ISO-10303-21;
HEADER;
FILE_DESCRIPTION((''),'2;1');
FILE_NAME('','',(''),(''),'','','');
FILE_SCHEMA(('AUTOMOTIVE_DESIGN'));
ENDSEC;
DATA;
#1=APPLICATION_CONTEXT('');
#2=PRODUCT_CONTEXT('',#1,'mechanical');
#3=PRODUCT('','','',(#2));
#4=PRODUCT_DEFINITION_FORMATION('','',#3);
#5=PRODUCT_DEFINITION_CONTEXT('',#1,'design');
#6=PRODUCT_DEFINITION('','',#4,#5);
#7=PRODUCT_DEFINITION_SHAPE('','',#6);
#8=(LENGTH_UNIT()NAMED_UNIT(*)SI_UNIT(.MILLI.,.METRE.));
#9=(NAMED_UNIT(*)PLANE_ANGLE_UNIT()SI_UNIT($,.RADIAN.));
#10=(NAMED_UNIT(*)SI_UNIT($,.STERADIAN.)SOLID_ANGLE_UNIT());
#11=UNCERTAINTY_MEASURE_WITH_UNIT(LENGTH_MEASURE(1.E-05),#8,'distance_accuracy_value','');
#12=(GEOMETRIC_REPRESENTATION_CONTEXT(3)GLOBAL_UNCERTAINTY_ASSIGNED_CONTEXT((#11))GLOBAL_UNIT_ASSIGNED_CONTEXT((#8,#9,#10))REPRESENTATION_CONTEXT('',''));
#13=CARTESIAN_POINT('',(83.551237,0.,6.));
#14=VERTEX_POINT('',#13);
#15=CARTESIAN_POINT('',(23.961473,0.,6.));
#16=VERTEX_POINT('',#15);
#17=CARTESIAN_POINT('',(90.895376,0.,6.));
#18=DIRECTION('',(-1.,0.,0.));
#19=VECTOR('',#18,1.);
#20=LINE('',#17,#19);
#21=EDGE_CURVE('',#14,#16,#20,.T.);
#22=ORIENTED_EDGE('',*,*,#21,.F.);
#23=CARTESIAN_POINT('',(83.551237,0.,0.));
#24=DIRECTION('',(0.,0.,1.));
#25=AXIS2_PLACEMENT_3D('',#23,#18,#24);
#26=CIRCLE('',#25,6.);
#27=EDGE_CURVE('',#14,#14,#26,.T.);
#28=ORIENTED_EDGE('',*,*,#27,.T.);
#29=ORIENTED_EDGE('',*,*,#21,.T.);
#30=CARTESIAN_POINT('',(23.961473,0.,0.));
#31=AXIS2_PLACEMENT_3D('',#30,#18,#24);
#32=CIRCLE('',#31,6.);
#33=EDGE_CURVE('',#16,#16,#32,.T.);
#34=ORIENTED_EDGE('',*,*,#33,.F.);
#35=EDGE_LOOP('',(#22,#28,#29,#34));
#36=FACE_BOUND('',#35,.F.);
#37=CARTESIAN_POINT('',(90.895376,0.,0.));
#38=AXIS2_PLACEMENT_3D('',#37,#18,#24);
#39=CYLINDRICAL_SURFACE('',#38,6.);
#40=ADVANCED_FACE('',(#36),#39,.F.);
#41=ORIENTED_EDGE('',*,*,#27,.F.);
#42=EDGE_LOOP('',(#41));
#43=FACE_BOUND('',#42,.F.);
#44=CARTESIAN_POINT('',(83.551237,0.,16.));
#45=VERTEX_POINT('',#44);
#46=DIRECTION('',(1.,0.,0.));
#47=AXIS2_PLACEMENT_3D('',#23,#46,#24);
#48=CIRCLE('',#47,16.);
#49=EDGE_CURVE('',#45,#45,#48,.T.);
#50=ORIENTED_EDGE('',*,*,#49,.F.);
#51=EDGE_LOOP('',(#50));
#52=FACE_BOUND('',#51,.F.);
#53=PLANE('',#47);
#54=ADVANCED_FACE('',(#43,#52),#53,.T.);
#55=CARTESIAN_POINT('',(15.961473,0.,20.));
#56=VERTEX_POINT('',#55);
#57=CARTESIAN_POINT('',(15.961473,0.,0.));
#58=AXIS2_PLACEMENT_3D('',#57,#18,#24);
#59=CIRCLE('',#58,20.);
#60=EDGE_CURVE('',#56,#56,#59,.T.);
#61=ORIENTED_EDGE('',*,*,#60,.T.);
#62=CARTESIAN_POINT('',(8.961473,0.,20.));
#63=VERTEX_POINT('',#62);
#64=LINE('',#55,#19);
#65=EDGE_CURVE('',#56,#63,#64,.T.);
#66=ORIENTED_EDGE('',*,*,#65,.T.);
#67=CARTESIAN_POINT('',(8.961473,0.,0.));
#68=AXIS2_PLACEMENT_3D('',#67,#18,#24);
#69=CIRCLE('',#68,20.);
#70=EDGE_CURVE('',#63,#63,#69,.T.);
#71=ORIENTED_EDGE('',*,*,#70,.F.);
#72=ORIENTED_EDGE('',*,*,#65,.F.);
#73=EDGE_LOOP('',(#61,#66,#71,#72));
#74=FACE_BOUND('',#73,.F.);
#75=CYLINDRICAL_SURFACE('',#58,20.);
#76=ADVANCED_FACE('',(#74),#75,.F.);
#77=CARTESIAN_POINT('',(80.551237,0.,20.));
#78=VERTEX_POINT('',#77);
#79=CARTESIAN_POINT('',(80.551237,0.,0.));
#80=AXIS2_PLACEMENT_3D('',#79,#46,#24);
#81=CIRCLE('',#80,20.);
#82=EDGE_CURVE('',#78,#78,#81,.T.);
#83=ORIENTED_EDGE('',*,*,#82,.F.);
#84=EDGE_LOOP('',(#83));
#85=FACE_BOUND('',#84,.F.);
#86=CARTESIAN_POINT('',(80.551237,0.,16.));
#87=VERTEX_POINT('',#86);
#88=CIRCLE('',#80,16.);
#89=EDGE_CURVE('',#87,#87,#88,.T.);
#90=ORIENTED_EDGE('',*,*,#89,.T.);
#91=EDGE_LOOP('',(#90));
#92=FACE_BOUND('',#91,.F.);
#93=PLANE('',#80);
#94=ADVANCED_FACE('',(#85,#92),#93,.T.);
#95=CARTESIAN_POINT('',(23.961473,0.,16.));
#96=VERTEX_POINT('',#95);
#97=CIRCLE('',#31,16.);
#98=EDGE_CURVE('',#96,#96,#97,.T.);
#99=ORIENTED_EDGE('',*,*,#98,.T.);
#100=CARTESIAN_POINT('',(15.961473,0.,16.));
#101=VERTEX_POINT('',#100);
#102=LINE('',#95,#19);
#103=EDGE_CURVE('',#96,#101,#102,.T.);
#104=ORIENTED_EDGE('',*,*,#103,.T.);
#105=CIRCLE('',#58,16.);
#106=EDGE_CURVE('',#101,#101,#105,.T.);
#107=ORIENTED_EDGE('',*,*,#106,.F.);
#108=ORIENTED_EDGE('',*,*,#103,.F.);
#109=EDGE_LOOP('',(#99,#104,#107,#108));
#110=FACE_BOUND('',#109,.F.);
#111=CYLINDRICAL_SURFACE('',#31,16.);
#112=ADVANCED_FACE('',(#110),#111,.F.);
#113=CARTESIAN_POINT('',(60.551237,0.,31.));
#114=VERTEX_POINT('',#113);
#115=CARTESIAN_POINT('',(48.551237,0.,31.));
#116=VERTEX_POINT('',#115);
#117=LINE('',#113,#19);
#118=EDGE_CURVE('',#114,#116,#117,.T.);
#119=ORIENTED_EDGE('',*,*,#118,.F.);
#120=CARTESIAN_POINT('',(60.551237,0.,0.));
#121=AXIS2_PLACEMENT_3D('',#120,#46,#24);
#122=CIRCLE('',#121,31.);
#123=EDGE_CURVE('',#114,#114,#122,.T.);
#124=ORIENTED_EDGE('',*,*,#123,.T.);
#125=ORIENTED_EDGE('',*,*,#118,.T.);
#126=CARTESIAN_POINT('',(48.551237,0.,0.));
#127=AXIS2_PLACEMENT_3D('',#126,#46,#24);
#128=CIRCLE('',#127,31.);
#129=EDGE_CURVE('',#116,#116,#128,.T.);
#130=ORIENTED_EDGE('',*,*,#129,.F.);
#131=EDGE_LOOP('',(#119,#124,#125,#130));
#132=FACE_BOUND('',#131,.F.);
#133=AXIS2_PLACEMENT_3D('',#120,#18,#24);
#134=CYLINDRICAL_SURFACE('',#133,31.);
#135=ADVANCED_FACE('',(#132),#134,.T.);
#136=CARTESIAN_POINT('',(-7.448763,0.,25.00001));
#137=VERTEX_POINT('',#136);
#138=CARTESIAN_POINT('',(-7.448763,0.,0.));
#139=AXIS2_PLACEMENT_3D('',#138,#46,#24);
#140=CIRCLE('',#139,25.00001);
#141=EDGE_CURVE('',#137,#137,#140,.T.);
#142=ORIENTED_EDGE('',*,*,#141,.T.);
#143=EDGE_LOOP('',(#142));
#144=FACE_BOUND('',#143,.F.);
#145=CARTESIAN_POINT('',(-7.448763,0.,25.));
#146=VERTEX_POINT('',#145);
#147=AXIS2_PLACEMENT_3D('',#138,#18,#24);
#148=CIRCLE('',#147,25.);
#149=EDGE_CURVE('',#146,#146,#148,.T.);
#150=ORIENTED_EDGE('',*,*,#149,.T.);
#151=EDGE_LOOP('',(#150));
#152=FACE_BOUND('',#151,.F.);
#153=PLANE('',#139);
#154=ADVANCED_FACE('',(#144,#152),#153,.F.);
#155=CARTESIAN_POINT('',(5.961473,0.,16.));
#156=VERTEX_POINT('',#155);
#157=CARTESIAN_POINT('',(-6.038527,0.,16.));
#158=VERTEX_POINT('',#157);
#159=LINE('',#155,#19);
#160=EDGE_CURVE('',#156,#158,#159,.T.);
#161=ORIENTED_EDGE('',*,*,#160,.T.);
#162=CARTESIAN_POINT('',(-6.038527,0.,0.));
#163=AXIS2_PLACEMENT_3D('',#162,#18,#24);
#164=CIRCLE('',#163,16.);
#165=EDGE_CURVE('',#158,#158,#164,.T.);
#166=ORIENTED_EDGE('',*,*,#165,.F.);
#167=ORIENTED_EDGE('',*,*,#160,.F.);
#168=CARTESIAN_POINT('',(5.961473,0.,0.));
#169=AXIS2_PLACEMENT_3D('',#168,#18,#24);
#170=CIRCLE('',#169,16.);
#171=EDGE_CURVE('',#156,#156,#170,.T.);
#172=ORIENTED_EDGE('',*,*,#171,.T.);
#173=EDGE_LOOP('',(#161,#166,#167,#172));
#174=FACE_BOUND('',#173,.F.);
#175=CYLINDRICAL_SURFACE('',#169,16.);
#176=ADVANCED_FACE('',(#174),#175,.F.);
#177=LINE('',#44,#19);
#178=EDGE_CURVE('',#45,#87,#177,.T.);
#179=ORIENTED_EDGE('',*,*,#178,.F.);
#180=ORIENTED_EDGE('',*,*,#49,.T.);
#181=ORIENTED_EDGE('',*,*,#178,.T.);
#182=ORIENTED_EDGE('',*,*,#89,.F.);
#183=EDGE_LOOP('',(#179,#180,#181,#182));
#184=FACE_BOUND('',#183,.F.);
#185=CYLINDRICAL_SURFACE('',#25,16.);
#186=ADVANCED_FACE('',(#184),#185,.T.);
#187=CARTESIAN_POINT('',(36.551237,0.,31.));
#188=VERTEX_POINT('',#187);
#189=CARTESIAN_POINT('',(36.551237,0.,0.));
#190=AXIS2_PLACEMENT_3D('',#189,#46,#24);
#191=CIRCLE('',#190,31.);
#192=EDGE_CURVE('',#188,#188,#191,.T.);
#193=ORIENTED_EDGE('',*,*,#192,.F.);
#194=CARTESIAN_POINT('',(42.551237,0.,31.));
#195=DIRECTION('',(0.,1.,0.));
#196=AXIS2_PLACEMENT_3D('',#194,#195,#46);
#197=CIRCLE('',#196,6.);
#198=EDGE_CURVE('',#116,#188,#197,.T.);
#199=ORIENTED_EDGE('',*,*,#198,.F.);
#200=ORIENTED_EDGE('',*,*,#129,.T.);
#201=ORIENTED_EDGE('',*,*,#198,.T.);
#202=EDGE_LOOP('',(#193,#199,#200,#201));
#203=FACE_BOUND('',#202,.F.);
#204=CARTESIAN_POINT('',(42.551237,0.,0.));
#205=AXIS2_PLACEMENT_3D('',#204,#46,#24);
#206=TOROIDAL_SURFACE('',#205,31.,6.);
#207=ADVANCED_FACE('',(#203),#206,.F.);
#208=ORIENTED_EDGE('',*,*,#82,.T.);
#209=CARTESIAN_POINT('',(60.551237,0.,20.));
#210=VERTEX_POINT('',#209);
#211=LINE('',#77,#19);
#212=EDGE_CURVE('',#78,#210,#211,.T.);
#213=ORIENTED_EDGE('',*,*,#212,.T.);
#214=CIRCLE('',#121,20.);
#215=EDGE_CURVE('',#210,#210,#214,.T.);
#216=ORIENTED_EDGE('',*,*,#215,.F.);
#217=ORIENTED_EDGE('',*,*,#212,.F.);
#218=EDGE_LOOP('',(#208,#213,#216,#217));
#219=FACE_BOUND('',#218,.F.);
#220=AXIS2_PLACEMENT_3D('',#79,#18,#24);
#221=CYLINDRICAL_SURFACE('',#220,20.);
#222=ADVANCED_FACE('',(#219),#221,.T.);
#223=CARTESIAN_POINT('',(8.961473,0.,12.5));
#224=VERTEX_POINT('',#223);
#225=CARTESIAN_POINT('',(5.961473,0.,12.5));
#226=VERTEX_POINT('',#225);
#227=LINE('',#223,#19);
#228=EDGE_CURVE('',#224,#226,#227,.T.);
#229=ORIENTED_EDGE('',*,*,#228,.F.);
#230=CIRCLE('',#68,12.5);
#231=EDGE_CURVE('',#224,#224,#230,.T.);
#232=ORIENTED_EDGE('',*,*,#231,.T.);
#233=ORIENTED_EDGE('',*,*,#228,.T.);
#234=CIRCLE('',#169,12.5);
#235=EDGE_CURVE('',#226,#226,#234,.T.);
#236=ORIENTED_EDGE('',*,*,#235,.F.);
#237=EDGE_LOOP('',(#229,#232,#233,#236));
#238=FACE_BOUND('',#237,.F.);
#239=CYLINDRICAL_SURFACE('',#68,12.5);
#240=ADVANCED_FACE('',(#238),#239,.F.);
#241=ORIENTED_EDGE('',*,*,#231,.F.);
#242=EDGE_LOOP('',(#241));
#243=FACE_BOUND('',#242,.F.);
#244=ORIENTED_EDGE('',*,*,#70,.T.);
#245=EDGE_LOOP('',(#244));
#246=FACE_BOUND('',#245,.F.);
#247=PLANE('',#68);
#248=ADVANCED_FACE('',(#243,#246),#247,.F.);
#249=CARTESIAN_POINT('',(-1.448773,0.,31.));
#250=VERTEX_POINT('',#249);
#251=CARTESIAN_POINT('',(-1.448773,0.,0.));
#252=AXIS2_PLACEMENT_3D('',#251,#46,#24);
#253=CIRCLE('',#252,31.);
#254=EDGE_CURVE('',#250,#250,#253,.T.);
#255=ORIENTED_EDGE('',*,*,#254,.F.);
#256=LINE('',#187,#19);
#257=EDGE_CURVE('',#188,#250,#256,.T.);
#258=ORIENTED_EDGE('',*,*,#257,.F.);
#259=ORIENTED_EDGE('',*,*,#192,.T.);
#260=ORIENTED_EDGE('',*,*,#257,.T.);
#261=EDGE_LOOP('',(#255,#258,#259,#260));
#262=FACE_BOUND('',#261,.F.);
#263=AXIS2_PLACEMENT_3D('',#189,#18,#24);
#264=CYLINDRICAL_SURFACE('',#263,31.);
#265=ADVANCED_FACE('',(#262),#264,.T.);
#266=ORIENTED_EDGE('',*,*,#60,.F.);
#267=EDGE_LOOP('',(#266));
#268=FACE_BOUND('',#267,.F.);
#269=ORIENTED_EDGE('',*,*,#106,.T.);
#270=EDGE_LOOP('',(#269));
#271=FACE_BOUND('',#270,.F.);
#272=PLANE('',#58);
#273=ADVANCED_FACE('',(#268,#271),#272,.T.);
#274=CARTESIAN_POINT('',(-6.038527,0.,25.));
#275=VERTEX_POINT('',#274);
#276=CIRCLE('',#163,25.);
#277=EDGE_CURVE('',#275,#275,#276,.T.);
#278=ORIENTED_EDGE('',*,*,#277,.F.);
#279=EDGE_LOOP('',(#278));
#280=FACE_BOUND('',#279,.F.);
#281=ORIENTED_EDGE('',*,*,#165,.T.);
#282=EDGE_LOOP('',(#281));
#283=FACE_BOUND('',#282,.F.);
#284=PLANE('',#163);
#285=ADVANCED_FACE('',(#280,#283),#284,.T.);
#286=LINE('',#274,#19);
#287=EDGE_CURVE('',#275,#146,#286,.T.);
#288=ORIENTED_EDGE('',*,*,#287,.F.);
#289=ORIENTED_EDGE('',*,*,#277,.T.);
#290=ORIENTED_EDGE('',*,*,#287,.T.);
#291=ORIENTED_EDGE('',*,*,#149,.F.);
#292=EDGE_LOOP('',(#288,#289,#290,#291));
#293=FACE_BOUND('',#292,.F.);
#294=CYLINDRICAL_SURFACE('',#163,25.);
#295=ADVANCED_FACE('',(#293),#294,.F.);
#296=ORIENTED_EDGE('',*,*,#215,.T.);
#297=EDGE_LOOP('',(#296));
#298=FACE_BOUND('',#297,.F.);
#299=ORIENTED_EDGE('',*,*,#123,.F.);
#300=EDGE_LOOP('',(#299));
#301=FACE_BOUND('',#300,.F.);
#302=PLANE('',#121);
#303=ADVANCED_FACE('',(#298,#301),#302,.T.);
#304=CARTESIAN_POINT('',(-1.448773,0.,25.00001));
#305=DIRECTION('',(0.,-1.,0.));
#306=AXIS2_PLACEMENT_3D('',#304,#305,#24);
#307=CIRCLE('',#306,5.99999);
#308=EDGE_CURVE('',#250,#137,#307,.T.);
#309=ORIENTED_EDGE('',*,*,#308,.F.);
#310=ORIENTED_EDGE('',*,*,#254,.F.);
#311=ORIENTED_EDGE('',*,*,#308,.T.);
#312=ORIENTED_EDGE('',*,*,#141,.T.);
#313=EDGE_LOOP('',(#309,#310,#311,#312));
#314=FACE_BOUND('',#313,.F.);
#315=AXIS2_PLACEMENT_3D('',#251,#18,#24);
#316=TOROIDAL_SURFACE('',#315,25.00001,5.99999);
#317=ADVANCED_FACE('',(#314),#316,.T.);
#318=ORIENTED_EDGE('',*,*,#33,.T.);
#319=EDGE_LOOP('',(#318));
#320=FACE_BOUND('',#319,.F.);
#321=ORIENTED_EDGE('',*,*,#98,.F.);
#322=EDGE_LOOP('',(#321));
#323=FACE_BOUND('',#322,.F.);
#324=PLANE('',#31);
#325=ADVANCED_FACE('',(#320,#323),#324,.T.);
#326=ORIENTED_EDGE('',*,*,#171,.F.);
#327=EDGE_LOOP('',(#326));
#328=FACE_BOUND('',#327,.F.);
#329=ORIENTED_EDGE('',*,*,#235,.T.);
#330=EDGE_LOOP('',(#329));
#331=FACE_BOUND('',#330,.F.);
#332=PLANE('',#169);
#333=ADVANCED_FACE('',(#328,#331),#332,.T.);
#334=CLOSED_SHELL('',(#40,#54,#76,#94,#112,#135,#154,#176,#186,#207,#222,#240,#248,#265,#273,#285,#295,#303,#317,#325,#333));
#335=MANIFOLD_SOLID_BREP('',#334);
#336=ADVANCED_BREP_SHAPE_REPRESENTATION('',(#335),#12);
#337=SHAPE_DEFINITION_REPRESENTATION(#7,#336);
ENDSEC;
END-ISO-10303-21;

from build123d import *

# Parameters (mm, degrees)
F4_R = 5.99999


# Not quite as in the source:
# - a fillet or chamfer is up to 0.001 mm smaller than in the source, because OpenCascade refuses the exact size


with BuildPart() as f1:
    # F0 (on Front) → F1 (revolve)
    with BuildSketch(Plane.XZ):
        with BuildLine():
            Line((-7.4487626523, 0), (0, 0))
            Line((0, 0), (83.5512373477, 0))
            Line((83.5512373477, 0), (83.5512373477, 16))
            Line((83.5512373477, 16), (80.5512373477, 16))
            Line((80.5512373477, 16), (80.5512373477, 20))
            Line((80.5512373477, 20), (60.5512373477, 20))
            Line((60.5512373477, 20), (60.5512373477, 31))
            Line((60.5512373477, 31), (48.5512373477, 31))
            ThreePointArc((48.5512373477, 31), (42.5512373477, 25), (36.5512373477, 31))
            Line((36.5512373477, 31), (-7.4487626523, 31))
            Line((-7.4487626523, 31), (-7.4487626523, 0))
        make_face()
    revolve(axis=Axis((38.0512373477, 0, 0), (1, 0, 0)))

    # F2 (on Front) → F3 (revolve, cut)
    with BuildSketch(Plane.XZ):
        Polygon((-8.5385272913, 25), (-8.5385272913, 0), (90.8953762729, 0), (90.8953762729, 6), (23.9614727087, 6), (23.9614727087, 16), (15.9614727087, 16), (15.9614727087, 20), (8.9614727087, 20), (8.9614727087, 12.5), (5.9614727087, 12.5), (5.9614727087, 16), (-6.0385272913, 16), (-6.0385272913, 25), align=None)
    revolve(axis=Axis((41.1784244908, 0, 0), (-1, 0, 0)), mode=Mode.SUBTRACT)

    # F4 (radius 6 in the source; OpenCascade refuses exactly that, so slightly less here)
    f4_edges = [f1.edges().sort_by_distance(p)[0] for p in [
        (-7.448763, 0, -31),
    ]]
    fillet(f4_edges, radius=F4_R)


solid = f1.part
